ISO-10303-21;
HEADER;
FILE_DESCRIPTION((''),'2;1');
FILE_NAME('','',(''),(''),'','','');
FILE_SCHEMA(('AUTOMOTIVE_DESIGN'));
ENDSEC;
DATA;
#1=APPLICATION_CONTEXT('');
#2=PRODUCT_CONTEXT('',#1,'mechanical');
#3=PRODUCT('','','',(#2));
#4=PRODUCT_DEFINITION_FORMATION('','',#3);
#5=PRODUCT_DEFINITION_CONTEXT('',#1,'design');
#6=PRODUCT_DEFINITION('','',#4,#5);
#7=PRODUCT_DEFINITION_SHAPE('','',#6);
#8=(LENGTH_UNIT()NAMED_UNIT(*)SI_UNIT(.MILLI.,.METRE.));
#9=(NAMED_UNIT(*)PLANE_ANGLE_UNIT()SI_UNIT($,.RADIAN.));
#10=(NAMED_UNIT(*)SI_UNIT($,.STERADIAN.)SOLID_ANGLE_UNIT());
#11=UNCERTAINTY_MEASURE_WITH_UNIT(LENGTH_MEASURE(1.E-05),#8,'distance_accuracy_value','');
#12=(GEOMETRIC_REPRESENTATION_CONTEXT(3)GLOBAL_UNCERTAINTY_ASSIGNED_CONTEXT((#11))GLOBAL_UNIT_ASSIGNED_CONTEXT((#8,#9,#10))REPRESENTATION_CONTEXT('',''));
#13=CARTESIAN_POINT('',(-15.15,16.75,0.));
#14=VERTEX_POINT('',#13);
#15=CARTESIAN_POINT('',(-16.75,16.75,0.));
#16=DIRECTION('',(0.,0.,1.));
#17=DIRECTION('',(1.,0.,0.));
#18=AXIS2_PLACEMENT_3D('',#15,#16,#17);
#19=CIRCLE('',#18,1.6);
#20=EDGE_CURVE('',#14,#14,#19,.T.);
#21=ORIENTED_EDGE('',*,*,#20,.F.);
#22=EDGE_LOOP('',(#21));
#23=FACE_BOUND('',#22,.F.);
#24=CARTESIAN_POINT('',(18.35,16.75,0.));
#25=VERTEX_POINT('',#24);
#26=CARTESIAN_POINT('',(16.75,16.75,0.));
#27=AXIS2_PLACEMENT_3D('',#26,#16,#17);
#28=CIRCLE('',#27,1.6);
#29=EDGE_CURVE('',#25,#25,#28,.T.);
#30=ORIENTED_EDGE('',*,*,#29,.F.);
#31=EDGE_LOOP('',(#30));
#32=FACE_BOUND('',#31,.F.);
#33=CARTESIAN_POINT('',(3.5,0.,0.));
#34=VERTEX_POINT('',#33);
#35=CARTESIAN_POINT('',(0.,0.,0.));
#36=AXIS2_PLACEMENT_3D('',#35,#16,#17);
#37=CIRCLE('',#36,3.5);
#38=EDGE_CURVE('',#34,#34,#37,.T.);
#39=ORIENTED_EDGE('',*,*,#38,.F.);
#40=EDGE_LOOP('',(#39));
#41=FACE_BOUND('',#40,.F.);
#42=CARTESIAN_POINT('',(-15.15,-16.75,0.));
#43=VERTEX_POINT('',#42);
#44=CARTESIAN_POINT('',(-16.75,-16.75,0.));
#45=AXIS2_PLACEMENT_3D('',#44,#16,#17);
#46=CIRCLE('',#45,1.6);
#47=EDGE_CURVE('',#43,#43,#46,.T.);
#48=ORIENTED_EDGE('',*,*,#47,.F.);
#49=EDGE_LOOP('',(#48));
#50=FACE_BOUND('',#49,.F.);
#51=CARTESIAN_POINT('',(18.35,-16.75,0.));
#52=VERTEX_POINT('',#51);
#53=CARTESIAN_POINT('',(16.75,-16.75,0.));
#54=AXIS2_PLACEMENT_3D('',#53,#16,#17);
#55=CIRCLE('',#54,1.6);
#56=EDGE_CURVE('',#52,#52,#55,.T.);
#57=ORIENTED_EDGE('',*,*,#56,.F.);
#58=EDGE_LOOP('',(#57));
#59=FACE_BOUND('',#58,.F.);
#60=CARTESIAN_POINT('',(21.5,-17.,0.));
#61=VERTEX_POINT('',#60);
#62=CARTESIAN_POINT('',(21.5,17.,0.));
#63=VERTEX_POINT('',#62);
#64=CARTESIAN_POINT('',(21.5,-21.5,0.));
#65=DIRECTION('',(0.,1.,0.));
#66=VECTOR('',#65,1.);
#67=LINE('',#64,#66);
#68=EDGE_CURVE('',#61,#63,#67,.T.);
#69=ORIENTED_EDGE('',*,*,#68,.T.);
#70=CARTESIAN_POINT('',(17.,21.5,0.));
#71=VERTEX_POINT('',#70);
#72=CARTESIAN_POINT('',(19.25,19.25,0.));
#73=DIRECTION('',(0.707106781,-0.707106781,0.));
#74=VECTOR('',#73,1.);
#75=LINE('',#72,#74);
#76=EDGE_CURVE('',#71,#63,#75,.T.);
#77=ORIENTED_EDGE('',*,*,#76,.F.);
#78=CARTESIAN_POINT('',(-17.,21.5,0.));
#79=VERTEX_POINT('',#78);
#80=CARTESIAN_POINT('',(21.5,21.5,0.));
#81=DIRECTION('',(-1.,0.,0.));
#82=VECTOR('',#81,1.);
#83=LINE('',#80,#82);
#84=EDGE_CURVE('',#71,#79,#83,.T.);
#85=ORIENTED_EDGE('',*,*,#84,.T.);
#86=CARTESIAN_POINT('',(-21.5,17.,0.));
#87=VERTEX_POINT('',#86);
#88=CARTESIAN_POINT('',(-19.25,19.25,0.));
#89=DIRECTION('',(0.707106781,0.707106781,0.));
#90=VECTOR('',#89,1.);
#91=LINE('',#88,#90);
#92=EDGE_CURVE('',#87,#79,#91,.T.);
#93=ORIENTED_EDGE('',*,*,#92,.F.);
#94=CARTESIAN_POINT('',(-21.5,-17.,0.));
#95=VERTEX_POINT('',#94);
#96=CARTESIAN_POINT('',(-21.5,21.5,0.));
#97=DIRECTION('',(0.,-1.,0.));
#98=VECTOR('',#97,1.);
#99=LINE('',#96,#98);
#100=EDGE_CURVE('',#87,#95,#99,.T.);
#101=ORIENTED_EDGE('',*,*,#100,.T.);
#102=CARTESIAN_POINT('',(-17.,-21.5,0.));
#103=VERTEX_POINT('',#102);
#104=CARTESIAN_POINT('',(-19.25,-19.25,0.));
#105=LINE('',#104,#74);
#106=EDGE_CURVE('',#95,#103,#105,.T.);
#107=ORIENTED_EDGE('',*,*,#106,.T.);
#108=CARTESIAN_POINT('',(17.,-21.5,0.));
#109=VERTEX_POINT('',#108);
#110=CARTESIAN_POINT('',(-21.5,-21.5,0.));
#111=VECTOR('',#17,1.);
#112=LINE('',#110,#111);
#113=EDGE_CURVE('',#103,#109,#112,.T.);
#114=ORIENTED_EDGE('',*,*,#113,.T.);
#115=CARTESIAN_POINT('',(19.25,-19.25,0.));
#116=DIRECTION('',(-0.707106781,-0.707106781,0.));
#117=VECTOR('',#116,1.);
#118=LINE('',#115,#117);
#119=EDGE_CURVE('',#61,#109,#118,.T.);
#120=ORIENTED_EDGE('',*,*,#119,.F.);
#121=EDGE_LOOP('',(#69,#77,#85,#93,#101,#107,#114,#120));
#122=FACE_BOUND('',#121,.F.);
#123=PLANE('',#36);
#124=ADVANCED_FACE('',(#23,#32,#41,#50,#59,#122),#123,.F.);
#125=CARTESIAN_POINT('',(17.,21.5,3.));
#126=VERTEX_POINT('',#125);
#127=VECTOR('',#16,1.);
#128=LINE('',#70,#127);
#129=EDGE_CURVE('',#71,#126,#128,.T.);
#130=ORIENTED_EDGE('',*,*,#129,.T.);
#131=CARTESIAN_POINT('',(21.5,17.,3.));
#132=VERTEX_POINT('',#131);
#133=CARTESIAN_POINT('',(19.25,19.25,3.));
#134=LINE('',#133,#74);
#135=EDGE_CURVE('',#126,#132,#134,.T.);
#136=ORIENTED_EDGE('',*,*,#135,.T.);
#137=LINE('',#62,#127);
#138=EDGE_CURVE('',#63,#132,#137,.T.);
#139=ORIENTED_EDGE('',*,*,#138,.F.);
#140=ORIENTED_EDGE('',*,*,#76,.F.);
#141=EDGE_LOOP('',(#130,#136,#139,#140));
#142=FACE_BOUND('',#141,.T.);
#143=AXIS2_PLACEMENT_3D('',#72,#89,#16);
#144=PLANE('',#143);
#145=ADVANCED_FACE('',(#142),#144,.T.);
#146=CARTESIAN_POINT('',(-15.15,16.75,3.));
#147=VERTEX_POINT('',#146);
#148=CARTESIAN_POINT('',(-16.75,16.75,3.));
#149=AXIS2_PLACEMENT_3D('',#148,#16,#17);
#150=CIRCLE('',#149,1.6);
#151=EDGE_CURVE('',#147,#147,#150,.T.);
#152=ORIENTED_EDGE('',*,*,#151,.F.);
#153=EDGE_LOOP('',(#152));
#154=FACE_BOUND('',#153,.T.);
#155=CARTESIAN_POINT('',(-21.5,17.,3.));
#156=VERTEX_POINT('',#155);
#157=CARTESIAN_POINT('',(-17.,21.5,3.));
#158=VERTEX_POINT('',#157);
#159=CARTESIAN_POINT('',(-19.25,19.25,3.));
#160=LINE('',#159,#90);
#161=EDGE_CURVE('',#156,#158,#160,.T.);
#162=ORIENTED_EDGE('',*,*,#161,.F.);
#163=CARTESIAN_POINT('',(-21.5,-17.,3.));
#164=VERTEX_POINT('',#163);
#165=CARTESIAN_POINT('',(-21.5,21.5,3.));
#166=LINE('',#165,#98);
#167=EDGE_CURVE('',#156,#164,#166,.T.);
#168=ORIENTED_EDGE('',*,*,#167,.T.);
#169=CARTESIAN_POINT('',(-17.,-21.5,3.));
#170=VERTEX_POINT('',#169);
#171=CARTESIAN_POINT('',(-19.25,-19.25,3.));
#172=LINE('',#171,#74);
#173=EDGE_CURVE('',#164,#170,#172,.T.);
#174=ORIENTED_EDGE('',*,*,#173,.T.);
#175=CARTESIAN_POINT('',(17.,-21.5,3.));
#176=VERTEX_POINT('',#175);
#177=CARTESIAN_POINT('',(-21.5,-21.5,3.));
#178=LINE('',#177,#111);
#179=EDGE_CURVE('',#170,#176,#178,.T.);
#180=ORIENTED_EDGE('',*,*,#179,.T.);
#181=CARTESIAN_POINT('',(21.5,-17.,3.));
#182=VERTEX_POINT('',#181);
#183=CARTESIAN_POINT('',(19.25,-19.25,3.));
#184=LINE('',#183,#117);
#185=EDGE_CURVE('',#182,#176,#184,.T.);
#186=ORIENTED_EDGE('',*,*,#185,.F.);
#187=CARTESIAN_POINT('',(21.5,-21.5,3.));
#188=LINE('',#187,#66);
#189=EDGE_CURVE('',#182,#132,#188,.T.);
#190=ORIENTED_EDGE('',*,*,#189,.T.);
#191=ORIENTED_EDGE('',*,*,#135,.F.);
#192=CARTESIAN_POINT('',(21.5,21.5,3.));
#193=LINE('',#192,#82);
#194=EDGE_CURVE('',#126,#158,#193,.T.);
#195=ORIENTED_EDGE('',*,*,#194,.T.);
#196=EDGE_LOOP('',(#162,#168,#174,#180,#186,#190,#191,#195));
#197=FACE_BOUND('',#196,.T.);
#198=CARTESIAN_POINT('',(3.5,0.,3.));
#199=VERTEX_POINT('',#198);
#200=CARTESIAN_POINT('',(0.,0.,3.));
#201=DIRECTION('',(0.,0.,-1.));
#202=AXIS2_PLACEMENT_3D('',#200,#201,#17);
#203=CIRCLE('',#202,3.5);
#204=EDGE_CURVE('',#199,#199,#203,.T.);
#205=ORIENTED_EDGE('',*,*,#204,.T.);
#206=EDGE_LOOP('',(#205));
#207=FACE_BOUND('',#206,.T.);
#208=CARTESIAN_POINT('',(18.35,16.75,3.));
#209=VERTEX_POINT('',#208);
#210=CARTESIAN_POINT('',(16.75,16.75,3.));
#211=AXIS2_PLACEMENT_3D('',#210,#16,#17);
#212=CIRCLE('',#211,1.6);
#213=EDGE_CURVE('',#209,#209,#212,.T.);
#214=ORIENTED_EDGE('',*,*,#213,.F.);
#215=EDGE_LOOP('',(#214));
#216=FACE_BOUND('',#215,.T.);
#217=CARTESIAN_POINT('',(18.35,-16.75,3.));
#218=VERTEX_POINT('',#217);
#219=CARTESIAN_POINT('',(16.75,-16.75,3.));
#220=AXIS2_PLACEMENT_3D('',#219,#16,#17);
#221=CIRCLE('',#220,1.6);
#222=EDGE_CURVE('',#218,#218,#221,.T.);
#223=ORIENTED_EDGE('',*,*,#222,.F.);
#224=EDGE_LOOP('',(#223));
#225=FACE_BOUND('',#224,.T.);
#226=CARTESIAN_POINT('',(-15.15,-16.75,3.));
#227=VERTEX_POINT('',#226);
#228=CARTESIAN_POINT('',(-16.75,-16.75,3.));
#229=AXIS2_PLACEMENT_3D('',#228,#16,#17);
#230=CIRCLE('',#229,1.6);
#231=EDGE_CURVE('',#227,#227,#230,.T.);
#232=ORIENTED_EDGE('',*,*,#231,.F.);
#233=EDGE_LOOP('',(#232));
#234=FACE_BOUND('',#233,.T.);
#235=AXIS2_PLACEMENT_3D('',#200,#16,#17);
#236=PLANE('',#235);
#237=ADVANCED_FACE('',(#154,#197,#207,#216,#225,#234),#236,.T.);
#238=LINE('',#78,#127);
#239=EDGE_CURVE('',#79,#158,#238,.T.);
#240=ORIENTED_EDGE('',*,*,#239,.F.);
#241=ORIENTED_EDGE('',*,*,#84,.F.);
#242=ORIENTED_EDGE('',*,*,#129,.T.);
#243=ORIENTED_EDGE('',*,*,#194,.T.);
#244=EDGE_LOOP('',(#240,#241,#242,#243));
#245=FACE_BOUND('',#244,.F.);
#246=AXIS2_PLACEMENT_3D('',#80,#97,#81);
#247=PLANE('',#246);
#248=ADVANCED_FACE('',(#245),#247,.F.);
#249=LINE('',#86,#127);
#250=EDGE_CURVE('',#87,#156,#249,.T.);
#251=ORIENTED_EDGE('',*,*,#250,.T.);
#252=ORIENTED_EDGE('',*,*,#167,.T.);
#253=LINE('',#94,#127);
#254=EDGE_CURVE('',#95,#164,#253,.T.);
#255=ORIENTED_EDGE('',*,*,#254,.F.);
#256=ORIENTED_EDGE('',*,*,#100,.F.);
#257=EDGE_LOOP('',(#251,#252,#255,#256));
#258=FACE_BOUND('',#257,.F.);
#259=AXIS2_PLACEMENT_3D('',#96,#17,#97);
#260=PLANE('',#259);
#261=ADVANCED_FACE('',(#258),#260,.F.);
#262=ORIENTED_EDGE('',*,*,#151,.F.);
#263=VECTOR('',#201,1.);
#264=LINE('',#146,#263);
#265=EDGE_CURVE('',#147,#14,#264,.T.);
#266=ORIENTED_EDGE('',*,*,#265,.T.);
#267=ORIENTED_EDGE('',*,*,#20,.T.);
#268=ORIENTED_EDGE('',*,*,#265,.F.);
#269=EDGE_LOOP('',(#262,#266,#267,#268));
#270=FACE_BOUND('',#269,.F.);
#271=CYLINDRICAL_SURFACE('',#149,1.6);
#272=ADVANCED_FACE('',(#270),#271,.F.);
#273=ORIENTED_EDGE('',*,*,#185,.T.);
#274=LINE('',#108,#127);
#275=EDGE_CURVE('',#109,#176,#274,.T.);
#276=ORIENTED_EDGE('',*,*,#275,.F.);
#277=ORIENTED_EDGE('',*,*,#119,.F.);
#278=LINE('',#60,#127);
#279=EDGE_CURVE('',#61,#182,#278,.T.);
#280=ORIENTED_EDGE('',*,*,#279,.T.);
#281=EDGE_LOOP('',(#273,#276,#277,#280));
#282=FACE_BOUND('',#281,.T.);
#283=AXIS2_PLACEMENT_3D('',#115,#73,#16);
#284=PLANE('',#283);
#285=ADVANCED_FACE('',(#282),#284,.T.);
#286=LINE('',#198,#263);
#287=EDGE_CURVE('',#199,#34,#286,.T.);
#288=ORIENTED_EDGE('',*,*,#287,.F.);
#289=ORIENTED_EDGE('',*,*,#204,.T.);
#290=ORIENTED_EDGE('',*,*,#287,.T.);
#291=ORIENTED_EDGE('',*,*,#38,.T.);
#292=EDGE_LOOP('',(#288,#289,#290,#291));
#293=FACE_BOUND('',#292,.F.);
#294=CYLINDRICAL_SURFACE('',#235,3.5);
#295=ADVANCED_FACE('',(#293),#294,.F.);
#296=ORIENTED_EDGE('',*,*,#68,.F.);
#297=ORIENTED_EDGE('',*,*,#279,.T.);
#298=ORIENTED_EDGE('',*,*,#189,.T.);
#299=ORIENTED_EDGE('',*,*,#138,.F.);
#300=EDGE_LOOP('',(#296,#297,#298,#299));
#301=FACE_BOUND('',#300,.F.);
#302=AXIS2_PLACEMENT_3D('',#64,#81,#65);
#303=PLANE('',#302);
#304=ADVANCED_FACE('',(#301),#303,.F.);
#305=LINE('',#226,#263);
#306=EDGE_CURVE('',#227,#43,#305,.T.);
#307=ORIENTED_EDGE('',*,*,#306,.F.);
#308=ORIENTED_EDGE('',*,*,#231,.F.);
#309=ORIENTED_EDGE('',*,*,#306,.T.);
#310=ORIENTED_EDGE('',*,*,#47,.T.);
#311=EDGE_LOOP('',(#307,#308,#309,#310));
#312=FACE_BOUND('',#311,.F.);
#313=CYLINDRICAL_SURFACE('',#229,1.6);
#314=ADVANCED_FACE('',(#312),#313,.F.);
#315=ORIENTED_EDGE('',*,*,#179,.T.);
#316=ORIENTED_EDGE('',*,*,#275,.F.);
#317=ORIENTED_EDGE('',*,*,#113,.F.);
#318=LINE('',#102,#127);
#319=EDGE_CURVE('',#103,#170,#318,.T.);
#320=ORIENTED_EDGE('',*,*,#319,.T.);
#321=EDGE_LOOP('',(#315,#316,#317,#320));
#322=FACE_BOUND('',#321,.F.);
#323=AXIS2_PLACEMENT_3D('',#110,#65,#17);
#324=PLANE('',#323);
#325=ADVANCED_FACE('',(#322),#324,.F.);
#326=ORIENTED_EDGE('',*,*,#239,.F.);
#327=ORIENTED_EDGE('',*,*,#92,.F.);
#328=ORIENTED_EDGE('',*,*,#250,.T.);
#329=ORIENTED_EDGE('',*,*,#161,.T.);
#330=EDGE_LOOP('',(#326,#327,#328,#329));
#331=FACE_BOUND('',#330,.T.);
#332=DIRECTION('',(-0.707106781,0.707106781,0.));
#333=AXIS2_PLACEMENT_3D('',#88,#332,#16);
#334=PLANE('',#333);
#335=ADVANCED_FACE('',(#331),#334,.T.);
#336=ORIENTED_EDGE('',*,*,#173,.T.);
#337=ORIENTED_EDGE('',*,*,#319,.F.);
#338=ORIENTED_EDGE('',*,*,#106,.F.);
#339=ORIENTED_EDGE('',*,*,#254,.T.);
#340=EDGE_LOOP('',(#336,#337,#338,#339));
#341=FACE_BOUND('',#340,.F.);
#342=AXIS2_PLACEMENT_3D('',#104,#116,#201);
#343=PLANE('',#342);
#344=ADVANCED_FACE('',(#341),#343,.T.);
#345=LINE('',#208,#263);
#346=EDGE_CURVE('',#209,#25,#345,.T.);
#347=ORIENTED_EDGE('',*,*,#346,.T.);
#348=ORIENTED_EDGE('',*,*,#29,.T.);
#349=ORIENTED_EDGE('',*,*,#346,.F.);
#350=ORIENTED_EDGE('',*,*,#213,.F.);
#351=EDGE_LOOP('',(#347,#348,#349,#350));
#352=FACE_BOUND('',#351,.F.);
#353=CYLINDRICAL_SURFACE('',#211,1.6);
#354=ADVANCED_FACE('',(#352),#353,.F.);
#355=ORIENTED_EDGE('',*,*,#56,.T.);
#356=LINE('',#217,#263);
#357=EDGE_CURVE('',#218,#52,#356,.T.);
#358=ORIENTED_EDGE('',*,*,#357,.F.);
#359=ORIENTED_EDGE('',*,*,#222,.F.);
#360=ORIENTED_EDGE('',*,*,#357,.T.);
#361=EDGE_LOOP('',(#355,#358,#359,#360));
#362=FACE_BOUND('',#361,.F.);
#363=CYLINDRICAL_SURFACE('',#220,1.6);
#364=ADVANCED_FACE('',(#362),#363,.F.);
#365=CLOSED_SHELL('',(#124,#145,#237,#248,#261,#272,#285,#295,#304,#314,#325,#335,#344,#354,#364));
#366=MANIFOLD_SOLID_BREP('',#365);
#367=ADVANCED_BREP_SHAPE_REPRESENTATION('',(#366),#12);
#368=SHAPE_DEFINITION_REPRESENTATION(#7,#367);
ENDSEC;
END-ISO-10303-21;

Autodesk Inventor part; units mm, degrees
ref_plane "YZ Plane" through (0, 0, 0) normal (1, 0, 0) x (0, 1, 0)
ref_plane "XZ Plane" through (0, 0, 0) normal (0, 1, 0) x (-1, 0, 0)
ref_plane "XY Plane" through (0, 0, 0) normal (0, 0, 1) x (1, 0, 0)
sketch "Sketch1" plane through (0, 0, 0) normal (0, 0, 1) x (1, 0, 0)
  line L0 (-21.5, -21.5) -> (21.5, -21.5)
  line L1 (21.5, -21.5) -> (21.5, 21.5)
  line L2 (21.5, 21.5) -> (-21.5, 21.5)
  line L3 (-21.5, 21.5) -> (-21.5, -21.5)
  line L4 (-21.5, -21.5) -> (21.5, 21.5) construction
  line L5 (21.5, -21.5) -> (-21.5, 21.5) construction
  point P0 (0, 0)
  dimension "d0" = 43
  dimension "d1" = 43
extrude "Plate1" add sketch "Sketch1" along normal blind 3
chamfer "Corner Chamfer1" distance 4.5 angle 45 4 edges at (21.5, 21.5, 1.5) (-21.5, 21.5, 1.5) (-21.5, -21.5, 1.5) (21.5, -21.5, 1.5)
sketch "Sketch2" plane through (0, 0, 3) normal (0, 0, 1) x (1, 0, 0)
  line L0 (-17, 21.5) -> (17, 21.5) projected
  line L1 (0, 21.5) -> (0, -21.5)
  line L2 (17, -21.5) -> (-17, -21.5) projected
  line L3 (-21.5, -17) -> (-21.5, 17) projected
  line L4 (-21.5, 0) -> (21.5, 0)
  line L5 (21.5, 17) -> (21.5, -17) projected
  circle A0 centre (-16.75, 16.75) radius 1.6
  circle A1 centre (16.75, 16.75) radius 1.6
  circle A2 centre (-16.75, -16.75) radius 1.6
  circle A3 centre (16.75, -16.75) radius 1.6
  circle A4 centre (0, 0) radius 3.5
  dimension "d6" = 3.2
  dimension "d7" = 33.5
  dimension "d8" = 33.5
  dimension "d11" = 7
extrude "Cut1" cut sketch "Sketch2" against normal blind 3
equation "\"d9\" = Thickness"
equation "\"d2\" = Thickness"
equation "\"BendRadius\" = Thickness"
equation "\"BendReliefWidth\" = Thickness"
equation "\"BendReliefDepth\" = 0.5 * Thickness"
equation "\"CornerReliefSize\" = 4 * Thickness"
equation "\"MinimumRemnant\" = 2 * Thickness"
equation "\"TransitionRadius\" = BendRadius"
equation "\"JacobiRadiusSize\" = BendRadius"
equation "\"GapSize\" = Thickness"
equation "\"Thickness\" = 3"
properties part number "DC Motor Fixation"
